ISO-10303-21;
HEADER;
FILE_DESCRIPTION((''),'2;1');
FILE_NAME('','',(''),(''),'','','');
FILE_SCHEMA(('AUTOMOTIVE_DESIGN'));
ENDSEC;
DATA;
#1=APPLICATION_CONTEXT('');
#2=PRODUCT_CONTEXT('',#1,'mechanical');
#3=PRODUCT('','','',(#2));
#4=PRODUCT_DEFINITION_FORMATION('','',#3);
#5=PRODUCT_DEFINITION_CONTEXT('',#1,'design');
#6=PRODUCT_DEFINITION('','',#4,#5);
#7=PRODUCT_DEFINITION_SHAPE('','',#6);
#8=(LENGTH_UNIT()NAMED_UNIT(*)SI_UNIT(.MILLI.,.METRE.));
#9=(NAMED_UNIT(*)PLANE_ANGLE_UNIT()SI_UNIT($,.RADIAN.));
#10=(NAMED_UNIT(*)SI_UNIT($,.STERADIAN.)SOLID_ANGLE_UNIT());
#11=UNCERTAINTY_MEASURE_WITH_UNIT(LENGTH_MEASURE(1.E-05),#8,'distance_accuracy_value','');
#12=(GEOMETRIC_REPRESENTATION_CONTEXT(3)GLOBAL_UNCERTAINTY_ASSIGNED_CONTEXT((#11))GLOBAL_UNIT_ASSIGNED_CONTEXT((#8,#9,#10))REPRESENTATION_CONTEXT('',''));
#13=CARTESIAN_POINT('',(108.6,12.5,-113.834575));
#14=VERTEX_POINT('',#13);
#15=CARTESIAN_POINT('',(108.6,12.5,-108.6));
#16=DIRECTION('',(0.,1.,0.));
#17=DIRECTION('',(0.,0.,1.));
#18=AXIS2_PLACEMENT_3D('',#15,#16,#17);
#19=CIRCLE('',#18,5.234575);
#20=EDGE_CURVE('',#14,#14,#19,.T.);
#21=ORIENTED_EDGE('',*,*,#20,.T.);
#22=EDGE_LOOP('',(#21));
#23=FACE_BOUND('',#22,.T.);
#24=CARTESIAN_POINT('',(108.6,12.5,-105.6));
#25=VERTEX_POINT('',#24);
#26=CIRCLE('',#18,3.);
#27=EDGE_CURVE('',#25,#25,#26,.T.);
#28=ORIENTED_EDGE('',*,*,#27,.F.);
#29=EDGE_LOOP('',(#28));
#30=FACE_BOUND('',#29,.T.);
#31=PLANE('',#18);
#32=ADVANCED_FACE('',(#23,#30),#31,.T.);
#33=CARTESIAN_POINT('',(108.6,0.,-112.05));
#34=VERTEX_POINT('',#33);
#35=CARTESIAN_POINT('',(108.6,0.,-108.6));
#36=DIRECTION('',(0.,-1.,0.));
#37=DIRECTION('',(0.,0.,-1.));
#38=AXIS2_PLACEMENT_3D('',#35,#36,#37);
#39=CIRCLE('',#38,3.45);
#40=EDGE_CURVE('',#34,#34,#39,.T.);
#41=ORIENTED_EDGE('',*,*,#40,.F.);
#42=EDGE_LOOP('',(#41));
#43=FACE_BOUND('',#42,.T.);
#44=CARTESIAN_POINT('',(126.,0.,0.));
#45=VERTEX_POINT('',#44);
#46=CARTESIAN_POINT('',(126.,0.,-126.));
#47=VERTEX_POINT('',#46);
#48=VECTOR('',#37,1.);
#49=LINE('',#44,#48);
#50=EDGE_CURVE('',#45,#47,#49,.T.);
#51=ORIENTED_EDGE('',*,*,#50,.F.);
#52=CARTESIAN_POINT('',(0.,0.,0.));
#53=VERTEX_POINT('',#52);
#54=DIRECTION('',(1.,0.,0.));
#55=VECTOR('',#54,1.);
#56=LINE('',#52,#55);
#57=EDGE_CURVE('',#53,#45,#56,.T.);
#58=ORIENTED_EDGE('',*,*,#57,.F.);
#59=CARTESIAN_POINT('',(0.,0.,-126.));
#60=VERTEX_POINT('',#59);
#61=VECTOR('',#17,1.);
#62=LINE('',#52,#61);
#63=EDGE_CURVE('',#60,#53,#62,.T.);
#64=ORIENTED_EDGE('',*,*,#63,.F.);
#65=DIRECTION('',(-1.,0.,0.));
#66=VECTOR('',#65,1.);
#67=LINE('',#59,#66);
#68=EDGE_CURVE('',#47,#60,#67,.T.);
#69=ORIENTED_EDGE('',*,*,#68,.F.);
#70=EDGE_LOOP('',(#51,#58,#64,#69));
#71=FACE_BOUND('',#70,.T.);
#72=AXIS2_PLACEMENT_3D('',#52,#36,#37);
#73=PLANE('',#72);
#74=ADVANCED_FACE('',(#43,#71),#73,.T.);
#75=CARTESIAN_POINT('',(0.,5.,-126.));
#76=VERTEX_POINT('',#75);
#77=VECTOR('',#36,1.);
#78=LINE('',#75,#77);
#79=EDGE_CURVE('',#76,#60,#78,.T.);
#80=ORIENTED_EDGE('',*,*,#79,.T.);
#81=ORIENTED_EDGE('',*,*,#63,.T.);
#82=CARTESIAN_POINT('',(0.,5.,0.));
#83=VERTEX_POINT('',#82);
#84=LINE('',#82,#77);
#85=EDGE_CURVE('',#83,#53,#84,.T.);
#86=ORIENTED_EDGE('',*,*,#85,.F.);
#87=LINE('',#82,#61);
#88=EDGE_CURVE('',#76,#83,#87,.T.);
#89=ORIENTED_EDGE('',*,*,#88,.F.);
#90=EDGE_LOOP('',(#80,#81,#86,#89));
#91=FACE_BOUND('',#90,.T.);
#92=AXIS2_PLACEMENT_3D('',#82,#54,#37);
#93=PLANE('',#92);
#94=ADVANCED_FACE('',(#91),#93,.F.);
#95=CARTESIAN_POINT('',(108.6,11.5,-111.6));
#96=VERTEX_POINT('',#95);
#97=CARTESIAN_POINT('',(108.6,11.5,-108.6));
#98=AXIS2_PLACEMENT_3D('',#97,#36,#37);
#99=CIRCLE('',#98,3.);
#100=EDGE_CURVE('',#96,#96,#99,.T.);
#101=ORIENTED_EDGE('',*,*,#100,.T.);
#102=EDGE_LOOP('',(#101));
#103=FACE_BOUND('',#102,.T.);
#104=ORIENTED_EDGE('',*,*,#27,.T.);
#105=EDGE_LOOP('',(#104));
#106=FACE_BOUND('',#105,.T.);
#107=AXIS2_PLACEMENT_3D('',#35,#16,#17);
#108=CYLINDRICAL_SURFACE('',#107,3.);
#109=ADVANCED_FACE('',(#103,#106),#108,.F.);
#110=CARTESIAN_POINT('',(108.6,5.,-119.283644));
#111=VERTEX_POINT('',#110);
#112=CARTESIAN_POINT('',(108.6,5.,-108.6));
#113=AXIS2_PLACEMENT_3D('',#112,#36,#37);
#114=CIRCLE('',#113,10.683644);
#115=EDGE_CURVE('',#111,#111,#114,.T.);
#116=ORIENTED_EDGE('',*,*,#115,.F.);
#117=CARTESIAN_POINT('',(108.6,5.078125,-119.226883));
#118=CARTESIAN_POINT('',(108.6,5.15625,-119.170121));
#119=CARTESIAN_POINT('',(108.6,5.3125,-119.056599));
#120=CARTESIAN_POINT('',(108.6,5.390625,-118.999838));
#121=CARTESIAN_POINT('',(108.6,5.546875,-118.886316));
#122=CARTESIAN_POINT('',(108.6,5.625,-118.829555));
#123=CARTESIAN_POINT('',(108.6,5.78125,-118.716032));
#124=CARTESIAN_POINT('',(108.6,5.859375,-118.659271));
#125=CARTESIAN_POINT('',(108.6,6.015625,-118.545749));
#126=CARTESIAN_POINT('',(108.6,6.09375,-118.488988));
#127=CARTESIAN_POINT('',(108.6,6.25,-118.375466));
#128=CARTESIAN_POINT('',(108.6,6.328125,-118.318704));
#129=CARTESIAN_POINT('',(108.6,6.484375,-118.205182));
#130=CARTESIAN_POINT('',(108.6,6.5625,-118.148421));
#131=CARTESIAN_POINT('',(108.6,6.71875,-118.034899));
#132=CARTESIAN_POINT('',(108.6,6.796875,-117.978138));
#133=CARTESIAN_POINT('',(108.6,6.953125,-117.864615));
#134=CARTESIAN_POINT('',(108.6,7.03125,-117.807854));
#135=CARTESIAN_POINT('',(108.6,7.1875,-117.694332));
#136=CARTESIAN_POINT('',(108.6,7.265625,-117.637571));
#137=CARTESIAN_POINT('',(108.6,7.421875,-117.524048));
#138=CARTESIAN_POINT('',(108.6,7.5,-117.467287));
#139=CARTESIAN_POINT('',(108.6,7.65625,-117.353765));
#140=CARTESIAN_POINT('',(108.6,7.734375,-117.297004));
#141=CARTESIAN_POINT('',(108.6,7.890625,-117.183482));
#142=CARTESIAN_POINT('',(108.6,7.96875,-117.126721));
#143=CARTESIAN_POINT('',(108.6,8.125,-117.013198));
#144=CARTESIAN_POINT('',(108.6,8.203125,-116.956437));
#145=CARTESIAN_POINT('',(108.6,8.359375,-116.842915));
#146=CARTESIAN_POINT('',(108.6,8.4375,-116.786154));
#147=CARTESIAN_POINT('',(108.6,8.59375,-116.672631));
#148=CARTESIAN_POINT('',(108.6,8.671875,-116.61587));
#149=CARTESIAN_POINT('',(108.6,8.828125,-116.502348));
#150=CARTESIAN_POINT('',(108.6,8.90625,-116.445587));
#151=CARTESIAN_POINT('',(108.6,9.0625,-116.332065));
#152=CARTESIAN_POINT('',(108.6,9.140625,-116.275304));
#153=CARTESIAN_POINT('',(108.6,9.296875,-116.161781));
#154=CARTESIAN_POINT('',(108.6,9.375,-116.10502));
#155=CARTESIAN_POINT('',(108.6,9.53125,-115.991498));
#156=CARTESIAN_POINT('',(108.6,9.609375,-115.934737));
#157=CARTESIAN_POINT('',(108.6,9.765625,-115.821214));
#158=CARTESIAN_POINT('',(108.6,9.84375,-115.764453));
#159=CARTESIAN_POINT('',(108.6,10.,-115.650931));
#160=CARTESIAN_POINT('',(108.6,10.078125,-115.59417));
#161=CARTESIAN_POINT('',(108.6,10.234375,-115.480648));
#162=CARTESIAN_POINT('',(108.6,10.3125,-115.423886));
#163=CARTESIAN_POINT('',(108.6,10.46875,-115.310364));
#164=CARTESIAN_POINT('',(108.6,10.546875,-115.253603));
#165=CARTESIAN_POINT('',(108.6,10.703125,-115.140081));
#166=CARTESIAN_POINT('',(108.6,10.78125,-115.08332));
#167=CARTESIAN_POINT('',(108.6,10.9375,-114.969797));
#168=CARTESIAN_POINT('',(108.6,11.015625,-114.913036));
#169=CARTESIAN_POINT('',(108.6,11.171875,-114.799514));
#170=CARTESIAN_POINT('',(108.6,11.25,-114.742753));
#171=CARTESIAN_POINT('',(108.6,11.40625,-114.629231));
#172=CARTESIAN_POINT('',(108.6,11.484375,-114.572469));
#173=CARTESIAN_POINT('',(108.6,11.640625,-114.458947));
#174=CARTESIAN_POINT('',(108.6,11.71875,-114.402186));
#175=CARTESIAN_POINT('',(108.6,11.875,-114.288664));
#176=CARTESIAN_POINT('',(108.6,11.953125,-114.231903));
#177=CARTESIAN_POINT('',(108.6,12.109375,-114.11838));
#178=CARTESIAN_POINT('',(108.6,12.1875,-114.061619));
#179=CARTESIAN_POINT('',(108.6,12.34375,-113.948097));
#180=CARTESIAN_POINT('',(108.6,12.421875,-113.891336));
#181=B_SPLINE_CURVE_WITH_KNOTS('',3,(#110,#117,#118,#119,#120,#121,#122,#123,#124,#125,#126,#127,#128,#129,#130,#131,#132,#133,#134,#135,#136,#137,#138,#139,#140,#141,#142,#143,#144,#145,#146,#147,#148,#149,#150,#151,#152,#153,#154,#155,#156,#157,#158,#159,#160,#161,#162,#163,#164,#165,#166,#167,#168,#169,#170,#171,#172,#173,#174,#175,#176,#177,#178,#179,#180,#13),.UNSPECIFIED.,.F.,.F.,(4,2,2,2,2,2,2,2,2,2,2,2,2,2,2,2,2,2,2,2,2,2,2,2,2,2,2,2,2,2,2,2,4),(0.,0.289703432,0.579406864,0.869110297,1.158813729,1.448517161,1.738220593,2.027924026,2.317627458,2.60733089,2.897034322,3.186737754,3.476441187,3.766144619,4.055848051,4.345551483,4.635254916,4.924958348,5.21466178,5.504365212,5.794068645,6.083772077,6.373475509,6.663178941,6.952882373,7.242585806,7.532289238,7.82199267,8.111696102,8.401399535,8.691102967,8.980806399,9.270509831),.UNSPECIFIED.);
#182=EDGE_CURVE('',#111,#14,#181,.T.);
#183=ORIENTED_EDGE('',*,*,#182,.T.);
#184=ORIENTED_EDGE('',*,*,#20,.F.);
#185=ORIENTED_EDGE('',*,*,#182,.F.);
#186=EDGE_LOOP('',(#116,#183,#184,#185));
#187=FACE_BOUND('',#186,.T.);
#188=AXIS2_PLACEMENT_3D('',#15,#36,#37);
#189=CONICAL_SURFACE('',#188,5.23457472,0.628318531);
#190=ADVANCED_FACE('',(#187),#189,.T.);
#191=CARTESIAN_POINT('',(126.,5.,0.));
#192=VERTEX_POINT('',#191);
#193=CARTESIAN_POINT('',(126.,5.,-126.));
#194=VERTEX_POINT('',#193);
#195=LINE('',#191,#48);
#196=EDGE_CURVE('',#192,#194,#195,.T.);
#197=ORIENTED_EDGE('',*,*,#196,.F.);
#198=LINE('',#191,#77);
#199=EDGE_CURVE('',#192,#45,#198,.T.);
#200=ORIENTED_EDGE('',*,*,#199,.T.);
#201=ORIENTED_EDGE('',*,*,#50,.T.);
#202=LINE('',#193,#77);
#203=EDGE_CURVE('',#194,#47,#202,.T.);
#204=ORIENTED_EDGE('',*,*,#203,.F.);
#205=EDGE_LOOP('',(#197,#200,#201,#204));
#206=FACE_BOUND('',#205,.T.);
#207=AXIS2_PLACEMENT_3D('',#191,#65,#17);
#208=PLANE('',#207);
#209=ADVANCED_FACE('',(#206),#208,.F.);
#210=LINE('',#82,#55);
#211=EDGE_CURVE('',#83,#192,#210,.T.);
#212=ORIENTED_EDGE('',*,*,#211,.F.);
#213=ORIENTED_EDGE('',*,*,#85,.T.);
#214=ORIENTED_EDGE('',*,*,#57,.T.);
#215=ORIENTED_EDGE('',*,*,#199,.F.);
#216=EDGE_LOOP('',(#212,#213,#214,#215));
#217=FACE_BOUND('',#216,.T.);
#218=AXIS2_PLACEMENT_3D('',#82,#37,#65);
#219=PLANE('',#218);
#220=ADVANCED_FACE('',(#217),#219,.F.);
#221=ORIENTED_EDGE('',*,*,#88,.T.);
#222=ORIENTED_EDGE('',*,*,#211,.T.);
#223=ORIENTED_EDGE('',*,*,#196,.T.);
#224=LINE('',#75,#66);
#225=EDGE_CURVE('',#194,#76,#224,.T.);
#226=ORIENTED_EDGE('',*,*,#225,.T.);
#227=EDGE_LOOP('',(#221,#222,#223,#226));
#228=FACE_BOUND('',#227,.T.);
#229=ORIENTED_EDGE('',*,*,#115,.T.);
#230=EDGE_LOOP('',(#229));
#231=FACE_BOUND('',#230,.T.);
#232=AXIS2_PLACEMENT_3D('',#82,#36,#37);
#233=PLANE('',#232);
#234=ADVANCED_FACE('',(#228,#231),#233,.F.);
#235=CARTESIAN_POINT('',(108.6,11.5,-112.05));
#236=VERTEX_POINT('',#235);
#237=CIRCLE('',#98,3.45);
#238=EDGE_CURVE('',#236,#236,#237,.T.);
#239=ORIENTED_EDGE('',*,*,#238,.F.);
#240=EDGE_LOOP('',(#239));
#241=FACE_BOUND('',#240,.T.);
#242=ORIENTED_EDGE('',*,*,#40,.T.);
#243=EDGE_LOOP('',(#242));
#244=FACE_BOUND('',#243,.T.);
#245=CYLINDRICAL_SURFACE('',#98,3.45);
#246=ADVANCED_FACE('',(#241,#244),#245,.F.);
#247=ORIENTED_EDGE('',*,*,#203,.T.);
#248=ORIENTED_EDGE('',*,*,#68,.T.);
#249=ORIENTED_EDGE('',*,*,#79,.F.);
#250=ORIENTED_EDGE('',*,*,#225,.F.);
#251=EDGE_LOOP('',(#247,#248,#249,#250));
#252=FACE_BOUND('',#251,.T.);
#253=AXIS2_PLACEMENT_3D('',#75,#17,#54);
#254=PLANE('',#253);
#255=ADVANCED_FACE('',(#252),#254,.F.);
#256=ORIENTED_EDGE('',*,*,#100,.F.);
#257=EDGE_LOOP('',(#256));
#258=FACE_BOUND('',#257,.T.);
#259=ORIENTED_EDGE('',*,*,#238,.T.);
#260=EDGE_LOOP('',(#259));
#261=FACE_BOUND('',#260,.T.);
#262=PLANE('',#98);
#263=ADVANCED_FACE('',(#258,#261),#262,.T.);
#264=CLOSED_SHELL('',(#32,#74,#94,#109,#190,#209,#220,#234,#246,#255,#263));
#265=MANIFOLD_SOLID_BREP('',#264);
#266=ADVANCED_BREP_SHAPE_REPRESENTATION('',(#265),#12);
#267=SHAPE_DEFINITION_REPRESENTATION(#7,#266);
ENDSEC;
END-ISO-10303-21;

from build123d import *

# Parameters (mm, degrees)
SKETCH1_W           = 126
SKETCH1_H           = 126
BOSS_EXTRUDE1_DEPTH = 5
SKETCH3_R           = 12.5
BOSS_EXTRUDE2_DEPTH = 7.5
SKETCH4_R           = 3.45
CUT_EXTRUDE1_DEPTH  = 11.5
SKETCH6_R           = 3
CUT_EXTRUDE2_DEPTH  = 179.628805068
CHAMFER1_SIZE       = 10
CHAMFER1_SIZE_2     = 7.26542528


with BuildPart() as part:
    # Sketch1 → Boss-Extrude1 (new body)
    with BuildSketch(Plane(origin=(0, 0, 0), x_dir=(1, 0, 0), z_dir=(0, 1, 0))):
        with Locations((63, 63)):
            Rectangle(SKETCH1_W, SKETCH1_H)
    extrude(amount=BOSS_EXTRUDE1_DEPTH)

    # Sketch3 → Boss-Extrude2 (add)
    with BuildSketch(Plane(origin=(0, 5, 0), x_dir=(1, 0, 0), z_dir=(0, 1, 0))):
        with Locations(Location((108.6, 108.6, 0), (0, 0, 90))):
            Circle(SKETCH3_R)
    extrude(amount=BOSS_EXTRUDE2_DEPTH)

    # Sketch4 → Cut-Extrude1 (cut)
    with BuildSketch(Plane.XZ):
        with Locations(Location((108.6, -108.6, 0), (0, 0, 270))):
            Circle(SKETCH4_R)
    extrude(amount=-CUT_EXTRUDE1_DEPTH, mode=Mode.SUBTRACT)

    # Sketch6 → Cut-Extrude2 (cut, through all)
    with BuildSketch(Plane(origin=(0, 12.5, 0), x_dir=(1, 0, 0), z_dir=(0, 1, 0))):
        with Locations(Location((108.6, 108.6, 0), (0, 0, 270))):
            Circle(SKETCH6_R)
    extrude(amount=-CUT_EXTRUDE2_DEPTH, mode=Mode.SUBTRACT)

    # Chamfer1
    # the kernel refuses this chamfer: 10, 7.26542528 mm, written as the material it takes off along each edge
    with BuildSketch(Plane(origin=(108.6, 12.5, -108.6), x_dir=(0, 0, -1), z_dir=(1, 0, 0))) as chamfer1_piece_1_section:
        Polygon((12.5, -CHAMFER1_SIZE), (12.5 - CHAMFER1_SIZE_2, 0), (12.5, 0), align=None)
    chamfer1_piece_1 = revolve(axis=Axis((108.6, 12.5, -108.6), (0, 1, 0)), mode=Mode.PRIVATE)
    chamfer1_piece_1 = split(chamfer1_piece_1, bisect_by=Plane(origin=(108.6, 5, -100.650989912), z_dir=(0, 1, 0)), keep=Keep.TOP, mode=Mode.PRIVATE)
    add(chamfer1_piece_1, mode=Mode.SUBTRACT)


solid = part.part
